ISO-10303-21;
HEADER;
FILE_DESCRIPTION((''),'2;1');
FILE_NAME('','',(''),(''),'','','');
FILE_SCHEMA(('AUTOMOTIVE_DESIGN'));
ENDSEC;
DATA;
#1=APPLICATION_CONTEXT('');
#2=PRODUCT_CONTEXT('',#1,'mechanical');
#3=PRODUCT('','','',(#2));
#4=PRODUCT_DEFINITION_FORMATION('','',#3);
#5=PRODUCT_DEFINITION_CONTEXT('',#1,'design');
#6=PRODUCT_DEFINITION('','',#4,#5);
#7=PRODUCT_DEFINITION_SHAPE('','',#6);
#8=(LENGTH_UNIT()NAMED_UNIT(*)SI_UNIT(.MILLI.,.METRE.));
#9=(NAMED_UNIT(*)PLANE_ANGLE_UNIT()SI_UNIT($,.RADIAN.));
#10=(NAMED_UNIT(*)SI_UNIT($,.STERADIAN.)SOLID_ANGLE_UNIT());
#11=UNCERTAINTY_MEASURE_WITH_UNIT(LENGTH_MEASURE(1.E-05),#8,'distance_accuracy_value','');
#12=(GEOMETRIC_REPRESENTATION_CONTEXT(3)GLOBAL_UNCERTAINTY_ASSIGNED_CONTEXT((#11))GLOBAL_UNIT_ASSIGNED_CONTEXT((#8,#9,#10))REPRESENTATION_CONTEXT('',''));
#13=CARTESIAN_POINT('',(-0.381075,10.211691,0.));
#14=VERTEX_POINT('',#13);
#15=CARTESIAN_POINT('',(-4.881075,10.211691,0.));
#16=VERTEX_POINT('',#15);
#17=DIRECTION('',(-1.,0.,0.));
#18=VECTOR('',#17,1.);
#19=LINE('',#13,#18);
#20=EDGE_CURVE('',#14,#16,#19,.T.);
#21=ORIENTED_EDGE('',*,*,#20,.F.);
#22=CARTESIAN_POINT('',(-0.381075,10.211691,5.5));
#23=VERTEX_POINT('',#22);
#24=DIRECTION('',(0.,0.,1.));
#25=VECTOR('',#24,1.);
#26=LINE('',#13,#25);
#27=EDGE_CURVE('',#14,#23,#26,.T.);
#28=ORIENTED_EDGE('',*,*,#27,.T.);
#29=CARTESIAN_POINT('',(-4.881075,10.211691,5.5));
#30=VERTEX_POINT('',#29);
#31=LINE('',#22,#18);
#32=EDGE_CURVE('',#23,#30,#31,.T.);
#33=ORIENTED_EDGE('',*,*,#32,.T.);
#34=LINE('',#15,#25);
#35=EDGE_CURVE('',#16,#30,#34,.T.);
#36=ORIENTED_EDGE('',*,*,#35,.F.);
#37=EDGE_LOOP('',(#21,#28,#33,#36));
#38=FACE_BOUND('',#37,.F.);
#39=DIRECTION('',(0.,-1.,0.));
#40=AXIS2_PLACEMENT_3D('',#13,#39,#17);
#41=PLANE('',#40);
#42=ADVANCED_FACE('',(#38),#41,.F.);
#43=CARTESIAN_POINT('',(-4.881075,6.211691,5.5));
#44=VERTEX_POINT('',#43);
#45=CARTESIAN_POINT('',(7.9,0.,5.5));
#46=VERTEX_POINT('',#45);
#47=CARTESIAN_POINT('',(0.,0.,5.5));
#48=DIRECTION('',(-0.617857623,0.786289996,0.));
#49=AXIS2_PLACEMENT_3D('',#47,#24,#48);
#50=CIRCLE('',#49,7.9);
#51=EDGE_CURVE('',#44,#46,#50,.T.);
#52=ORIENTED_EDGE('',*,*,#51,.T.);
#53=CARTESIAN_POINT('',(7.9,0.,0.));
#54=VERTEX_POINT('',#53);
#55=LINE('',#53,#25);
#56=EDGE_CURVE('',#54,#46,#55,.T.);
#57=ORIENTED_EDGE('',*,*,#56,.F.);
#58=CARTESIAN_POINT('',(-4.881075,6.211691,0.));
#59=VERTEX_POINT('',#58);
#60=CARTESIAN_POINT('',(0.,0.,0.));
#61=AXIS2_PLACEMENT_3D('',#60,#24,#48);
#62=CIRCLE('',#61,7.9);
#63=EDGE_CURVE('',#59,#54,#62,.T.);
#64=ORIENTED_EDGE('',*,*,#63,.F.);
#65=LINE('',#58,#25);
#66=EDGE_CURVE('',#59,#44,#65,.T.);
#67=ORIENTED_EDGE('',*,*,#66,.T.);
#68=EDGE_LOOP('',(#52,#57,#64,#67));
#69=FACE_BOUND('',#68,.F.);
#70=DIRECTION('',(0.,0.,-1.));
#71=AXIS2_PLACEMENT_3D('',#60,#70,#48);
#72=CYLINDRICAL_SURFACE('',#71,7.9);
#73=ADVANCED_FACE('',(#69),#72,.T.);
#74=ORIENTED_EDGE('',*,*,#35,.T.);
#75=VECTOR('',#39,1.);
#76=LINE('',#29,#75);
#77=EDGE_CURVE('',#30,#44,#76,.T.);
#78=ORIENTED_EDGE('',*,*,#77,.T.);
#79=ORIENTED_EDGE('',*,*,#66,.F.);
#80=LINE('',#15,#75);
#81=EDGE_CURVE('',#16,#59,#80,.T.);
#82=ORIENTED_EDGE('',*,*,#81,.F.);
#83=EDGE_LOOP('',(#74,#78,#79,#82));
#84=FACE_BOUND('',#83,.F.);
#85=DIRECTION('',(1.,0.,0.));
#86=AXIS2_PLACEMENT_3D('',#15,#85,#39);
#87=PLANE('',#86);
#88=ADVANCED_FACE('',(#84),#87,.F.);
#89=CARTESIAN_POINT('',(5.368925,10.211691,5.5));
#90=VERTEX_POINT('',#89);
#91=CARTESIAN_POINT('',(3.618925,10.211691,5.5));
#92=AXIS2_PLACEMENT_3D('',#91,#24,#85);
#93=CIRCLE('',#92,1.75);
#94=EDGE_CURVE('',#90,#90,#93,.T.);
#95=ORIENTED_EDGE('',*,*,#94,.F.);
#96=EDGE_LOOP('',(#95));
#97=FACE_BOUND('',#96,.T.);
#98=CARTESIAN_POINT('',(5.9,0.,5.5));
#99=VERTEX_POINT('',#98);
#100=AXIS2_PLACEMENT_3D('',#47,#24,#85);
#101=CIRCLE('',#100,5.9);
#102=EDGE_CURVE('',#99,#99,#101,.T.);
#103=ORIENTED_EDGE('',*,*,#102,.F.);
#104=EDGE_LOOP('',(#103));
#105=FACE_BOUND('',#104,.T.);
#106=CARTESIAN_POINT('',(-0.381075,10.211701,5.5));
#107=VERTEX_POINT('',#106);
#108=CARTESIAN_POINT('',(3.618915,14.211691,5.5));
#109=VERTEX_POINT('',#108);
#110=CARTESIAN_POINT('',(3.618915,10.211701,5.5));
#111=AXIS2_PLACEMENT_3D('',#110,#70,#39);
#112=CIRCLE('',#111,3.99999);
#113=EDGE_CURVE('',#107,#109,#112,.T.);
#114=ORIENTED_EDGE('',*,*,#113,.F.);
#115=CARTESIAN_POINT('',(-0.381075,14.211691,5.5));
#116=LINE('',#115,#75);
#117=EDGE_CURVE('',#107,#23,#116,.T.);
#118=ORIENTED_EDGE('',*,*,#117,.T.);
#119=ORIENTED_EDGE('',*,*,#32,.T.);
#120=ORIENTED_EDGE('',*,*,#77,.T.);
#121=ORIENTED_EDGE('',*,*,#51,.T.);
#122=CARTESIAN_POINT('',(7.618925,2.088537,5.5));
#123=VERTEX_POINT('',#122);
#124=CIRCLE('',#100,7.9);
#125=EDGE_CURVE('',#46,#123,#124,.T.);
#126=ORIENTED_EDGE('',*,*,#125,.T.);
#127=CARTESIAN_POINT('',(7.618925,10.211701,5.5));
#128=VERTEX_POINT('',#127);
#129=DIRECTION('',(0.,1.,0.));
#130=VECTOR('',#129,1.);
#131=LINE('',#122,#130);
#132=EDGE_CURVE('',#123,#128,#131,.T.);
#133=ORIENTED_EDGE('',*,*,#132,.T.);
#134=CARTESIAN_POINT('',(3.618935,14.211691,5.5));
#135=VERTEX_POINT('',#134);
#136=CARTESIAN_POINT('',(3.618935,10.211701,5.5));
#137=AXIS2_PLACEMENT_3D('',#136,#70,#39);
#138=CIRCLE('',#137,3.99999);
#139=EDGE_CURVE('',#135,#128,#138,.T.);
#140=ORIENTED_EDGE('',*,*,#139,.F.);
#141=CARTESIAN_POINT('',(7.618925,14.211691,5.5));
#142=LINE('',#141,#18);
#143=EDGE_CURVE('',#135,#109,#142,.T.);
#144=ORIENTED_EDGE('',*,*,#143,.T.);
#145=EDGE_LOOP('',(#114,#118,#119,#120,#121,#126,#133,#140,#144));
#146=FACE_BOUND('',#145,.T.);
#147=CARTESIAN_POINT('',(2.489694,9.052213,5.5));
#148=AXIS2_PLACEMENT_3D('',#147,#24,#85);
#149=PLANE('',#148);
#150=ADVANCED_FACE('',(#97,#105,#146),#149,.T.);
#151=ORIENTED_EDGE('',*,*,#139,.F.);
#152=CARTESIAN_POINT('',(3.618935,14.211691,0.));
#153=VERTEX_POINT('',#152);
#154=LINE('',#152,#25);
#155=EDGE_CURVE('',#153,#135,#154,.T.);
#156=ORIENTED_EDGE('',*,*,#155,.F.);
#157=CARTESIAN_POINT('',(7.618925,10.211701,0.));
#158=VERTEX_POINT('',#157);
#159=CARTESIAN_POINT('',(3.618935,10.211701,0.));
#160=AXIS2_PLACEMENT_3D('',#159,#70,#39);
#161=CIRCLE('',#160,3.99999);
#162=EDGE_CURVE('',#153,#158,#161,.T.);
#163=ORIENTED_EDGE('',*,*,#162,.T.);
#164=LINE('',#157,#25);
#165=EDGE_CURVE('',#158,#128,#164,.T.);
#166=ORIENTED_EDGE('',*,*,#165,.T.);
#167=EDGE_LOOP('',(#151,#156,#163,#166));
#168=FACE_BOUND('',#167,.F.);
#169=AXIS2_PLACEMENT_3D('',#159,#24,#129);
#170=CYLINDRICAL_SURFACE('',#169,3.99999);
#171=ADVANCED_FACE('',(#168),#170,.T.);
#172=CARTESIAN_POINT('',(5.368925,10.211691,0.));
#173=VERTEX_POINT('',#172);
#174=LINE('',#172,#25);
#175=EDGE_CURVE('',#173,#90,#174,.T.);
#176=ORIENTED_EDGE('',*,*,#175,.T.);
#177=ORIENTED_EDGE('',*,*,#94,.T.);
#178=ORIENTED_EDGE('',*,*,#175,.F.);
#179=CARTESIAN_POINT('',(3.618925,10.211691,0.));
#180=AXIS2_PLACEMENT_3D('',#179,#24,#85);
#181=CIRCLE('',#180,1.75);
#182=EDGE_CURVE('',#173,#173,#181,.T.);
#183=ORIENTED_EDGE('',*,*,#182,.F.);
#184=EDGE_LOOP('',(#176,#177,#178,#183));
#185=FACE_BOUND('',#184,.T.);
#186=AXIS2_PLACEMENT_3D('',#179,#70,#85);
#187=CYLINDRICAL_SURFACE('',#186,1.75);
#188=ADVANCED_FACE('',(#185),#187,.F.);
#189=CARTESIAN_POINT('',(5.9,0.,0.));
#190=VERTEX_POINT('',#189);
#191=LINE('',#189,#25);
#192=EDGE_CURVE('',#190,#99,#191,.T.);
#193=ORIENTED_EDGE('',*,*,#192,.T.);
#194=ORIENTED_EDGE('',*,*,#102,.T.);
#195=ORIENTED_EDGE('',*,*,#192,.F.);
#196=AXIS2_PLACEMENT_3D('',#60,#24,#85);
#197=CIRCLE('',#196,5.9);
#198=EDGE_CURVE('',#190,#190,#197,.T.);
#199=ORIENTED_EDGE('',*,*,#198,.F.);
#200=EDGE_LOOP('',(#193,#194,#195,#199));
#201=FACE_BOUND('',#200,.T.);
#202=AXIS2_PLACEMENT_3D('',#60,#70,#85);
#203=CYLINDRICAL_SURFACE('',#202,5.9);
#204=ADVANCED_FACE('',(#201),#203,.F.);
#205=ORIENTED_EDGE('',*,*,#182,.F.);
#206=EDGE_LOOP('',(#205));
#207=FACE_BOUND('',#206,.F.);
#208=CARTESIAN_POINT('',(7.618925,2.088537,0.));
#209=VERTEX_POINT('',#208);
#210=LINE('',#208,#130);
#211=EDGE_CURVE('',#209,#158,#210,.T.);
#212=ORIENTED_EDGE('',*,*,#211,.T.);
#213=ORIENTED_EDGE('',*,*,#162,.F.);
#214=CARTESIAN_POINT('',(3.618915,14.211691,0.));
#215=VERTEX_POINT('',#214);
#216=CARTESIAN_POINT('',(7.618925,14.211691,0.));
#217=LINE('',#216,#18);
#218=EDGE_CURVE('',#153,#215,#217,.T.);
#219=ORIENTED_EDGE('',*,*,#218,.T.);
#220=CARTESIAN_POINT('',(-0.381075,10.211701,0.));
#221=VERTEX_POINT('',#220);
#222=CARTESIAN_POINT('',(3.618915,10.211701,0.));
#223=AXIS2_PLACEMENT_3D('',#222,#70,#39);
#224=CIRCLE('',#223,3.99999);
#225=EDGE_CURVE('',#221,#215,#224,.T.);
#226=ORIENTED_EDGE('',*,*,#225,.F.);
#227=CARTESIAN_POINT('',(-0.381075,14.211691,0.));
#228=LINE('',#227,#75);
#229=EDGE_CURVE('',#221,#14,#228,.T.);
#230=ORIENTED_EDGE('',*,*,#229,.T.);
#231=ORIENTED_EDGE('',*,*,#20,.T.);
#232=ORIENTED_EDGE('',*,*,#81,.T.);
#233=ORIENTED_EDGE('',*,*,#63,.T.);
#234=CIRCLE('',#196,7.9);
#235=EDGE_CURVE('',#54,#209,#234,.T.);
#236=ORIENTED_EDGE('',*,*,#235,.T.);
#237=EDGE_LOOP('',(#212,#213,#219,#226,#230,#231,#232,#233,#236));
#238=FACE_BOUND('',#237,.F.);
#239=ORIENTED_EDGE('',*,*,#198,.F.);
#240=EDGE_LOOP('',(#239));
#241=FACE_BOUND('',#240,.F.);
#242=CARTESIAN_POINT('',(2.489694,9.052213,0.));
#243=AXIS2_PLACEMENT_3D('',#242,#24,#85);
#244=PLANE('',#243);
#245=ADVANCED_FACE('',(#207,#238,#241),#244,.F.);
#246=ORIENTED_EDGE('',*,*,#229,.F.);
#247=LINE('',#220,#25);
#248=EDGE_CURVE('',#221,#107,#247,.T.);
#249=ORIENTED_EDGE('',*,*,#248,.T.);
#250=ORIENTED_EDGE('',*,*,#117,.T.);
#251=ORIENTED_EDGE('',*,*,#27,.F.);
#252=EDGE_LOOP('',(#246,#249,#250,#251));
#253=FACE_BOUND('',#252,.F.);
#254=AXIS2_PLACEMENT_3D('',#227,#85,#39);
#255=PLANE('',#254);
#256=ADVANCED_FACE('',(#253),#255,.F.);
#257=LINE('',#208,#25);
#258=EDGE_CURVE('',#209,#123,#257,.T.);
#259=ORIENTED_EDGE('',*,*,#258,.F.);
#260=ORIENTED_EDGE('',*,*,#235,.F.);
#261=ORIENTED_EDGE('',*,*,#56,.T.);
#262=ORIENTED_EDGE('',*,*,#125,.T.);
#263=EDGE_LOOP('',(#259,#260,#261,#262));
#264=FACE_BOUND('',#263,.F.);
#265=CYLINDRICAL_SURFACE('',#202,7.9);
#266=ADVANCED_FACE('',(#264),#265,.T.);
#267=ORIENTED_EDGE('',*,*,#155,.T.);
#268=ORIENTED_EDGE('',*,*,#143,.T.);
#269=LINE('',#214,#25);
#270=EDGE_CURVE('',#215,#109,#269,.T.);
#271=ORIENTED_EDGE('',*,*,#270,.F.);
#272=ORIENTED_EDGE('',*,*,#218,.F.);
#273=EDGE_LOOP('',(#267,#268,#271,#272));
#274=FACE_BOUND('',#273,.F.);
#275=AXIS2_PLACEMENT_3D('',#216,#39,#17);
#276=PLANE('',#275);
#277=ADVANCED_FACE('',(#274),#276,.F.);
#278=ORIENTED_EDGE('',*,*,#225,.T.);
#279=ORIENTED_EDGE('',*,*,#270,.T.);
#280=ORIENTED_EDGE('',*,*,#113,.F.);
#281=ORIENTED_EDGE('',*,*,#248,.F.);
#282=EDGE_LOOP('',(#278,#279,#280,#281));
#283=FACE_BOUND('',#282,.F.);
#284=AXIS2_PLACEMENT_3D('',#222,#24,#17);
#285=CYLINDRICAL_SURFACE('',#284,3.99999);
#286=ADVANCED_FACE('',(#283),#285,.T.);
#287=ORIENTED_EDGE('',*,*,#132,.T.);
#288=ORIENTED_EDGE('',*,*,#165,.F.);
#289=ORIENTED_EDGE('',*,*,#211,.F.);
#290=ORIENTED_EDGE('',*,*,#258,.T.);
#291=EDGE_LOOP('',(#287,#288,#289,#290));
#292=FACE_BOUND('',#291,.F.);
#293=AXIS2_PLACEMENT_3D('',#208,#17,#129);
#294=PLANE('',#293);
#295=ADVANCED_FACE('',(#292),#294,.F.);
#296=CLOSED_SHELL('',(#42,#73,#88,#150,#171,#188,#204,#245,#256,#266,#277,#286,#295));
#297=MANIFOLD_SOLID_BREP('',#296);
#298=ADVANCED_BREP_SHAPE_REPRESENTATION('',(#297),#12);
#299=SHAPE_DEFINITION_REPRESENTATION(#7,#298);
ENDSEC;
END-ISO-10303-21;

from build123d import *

# Parameters (mm, degrees)
F0_R     = 1.75
F0_R_2   = 5.9
F1_DEPTH = 5.5
F2_R     = 3.99999


# Not quite as in the source:
# - a fillet or chamfer is up to 0.001 mm smaller than in the source, because OpenCascade refuses the exact size


with BuildPart() as f1:
    # F0 (on Top) → F1 (new body)
    with BuildSketch(Plane.XY):
        with BuildLine():
            ThreePointArc((-4.881075218, 6.2116909708), (2.4746829154, 7.5023959152), (7.618924782, 2.0885366088))
            Line((7.618924782, 2.0885366088), (7.618924782, 14.2116909708))
            Line((7.618924782, 14.2116909708), (-0.381075218, 14.2116909708))
            Line((-0.381075218, 14.2116909708), (-0.381075218, 10.2116909708))
            Line((-0.381075218, 10.2116909708), (-4.881075218, 10.2116909708))
            Line((-4.881075218, 10.2116909708), (-4.881075218, 6.2116909708))
        make_face()
        with Locations((3.618924782, 10.2116909708)):
            Circle(F0_R, mode=Mode.SUBTRACT)
        with BuildLine():
            ThreePointArc((-4.881075218, 6.2116909708), (-3.4532235504, -7.1052971163), (7.9, 0))
            ThreePointArc((7.9, 0), (7.8294158715, 1.0536826425), (7.618924782, 2.0885366088))
            ThreePointArc((7.618924782, 2.0885366088), (2.4746829154, 7.5023959152), (-4.881075218, 6.2116909708))
        make_face()
        Circle(F0_R_2, mode=Mode.SUBTRACT)
    extrude(amount=F1_DEPTH)

    # F2 (radius 4 in the source; OpenCascade refuses exactly that, so slightly less here)
    f2_edges = [f1.edges().sort_by_distance(p)[0] for p in [
        (-0.381075, 14.211691, 2.75),
        (7.618925, 14.211691, 2.75),
    ]]
    fillet(f2_edges, radius=F2_R)


solid = f1.part
